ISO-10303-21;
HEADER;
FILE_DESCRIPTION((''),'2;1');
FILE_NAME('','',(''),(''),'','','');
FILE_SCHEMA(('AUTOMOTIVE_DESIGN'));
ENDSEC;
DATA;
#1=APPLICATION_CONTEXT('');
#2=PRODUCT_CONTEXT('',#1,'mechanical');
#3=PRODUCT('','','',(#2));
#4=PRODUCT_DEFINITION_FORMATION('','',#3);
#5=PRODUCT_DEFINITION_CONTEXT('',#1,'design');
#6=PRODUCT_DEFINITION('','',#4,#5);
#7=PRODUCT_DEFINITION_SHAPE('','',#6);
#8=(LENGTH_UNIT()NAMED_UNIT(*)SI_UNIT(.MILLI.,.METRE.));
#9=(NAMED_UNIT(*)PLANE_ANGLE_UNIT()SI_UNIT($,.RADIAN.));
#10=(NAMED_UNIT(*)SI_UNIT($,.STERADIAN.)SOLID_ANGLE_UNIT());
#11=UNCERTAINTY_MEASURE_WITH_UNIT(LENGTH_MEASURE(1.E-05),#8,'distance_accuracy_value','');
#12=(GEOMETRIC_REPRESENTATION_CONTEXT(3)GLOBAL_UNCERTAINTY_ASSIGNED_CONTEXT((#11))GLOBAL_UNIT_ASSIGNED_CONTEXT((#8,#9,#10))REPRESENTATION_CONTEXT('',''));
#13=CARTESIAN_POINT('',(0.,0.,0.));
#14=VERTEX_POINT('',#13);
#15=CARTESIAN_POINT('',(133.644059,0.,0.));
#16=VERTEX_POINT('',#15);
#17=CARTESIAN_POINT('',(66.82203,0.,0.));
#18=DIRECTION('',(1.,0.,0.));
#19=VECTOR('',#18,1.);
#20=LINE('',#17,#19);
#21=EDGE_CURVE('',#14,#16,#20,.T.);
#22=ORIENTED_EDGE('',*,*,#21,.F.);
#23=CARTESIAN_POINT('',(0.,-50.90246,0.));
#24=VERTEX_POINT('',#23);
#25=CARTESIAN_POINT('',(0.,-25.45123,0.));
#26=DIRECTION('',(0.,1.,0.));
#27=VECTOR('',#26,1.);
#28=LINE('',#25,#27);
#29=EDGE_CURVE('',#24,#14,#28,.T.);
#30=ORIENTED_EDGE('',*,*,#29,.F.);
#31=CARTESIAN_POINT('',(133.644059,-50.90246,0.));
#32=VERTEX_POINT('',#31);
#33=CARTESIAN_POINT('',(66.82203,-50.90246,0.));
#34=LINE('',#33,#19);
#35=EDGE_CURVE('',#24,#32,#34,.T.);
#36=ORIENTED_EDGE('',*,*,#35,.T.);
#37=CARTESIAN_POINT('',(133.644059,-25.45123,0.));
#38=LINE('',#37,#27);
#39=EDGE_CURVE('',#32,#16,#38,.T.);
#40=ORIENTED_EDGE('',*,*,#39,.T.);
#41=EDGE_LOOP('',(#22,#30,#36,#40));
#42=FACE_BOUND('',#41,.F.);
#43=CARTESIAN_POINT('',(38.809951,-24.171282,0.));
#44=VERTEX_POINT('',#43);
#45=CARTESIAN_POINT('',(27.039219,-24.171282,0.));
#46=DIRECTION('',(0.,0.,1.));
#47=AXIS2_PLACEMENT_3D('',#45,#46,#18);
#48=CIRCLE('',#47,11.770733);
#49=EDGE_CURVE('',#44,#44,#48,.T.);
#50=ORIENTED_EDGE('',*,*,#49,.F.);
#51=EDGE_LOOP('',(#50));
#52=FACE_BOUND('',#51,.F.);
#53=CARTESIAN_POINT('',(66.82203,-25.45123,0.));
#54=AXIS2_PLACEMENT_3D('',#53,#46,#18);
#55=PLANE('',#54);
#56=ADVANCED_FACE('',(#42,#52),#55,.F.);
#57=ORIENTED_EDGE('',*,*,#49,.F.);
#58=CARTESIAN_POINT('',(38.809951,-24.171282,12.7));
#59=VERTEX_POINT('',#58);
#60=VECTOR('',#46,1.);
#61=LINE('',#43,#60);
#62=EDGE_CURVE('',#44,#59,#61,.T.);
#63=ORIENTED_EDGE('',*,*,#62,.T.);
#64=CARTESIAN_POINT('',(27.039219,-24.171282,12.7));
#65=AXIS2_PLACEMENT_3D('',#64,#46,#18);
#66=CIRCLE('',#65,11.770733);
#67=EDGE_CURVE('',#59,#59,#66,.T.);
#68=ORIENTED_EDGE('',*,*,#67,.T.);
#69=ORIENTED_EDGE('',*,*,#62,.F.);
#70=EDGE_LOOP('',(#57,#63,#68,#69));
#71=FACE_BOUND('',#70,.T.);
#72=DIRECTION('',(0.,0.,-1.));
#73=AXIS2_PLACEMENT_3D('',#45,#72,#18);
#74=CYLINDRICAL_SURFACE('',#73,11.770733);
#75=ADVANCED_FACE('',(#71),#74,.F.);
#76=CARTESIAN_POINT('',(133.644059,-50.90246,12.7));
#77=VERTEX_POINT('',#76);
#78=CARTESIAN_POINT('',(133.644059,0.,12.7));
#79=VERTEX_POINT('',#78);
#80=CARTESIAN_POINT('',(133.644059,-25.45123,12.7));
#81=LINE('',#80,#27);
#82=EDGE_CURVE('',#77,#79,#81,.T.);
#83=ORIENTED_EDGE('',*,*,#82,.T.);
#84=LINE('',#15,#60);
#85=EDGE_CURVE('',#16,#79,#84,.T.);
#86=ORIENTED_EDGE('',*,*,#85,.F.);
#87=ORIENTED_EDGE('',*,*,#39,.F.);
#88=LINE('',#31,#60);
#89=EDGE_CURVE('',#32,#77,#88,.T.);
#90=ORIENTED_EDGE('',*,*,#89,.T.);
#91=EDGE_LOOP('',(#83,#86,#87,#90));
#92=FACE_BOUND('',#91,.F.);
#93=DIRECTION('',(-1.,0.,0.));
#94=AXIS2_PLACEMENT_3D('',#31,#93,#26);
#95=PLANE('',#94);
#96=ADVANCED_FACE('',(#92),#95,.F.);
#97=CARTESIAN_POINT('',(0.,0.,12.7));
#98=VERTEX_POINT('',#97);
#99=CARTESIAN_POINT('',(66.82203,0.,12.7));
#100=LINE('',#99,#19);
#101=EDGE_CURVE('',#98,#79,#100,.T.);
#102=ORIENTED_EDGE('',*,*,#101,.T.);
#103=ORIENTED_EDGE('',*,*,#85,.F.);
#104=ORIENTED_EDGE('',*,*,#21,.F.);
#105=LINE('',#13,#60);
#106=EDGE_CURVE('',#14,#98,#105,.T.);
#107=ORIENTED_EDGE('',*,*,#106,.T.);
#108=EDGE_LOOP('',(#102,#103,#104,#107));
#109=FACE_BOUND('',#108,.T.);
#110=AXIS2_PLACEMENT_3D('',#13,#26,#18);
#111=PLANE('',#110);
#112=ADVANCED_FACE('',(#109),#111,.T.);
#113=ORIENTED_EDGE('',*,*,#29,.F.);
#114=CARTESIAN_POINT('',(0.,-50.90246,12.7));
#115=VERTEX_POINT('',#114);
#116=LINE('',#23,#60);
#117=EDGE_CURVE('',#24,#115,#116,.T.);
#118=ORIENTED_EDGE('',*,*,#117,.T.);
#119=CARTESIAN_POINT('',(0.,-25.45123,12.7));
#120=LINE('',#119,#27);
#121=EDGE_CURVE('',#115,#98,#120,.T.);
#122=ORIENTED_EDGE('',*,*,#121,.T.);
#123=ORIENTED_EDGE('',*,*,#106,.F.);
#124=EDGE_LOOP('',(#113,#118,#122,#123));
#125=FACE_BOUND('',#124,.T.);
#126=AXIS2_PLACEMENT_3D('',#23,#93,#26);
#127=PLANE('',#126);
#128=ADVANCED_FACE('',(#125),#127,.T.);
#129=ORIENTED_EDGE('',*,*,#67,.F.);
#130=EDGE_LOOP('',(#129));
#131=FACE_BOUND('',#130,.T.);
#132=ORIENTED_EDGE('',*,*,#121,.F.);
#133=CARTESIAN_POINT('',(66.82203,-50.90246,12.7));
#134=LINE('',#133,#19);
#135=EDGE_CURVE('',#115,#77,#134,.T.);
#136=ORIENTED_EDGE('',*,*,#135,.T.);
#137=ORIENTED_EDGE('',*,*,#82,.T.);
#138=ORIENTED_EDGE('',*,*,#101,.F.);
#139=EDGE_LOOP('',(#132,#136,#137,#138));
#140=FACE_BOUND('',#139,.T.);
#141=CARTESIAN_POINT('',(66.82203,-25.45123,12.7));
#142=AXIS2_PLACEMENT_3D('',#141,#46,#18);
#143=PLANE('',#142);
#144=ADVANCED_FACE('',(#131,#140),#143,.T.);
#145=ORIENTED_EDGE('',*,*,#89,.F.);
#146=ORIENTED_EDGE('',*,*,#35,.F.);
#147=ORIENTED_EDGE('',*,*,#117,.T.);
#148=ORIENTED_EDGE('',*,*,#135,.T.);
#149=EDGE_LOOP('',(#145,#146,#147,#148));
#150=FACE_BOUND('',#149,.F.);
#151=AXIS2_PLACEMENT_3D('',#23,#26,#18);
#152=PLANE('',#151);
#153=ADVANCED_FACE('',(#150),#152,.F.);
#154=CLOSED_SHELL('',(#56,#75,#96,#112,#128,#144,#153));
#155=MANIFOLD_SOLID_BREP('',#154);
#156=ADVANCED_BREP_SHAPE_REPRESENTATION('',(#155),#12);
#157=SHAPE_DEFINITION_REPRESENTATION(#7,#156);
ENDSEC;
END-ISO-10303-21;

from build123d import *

# Parameters (mm, degrees)
F0_W     = 133.6440593004
F0_H     = 50.9024597704
F0_R     = 11.7707327429
F1_DEPTH = 12.7


# Not quite as in the source:
# - a feature names something its author has since deleted; it is built from what else it names


with BuildPart() as f1:
    # F0 (on Top) → F1 (new body)
    with BuildSketch(Plane.XY):
        with Locations((66.8220296502, -25.4512298852)):
            Rectangle(F0_W, F0_H)
        with Locations((27.039218694, -24.171281606)):
            Circle(F0_R, mode=Mode.SUBTRACT)
    extrude(amount=F1_DEPTH)


solid = f1.part
